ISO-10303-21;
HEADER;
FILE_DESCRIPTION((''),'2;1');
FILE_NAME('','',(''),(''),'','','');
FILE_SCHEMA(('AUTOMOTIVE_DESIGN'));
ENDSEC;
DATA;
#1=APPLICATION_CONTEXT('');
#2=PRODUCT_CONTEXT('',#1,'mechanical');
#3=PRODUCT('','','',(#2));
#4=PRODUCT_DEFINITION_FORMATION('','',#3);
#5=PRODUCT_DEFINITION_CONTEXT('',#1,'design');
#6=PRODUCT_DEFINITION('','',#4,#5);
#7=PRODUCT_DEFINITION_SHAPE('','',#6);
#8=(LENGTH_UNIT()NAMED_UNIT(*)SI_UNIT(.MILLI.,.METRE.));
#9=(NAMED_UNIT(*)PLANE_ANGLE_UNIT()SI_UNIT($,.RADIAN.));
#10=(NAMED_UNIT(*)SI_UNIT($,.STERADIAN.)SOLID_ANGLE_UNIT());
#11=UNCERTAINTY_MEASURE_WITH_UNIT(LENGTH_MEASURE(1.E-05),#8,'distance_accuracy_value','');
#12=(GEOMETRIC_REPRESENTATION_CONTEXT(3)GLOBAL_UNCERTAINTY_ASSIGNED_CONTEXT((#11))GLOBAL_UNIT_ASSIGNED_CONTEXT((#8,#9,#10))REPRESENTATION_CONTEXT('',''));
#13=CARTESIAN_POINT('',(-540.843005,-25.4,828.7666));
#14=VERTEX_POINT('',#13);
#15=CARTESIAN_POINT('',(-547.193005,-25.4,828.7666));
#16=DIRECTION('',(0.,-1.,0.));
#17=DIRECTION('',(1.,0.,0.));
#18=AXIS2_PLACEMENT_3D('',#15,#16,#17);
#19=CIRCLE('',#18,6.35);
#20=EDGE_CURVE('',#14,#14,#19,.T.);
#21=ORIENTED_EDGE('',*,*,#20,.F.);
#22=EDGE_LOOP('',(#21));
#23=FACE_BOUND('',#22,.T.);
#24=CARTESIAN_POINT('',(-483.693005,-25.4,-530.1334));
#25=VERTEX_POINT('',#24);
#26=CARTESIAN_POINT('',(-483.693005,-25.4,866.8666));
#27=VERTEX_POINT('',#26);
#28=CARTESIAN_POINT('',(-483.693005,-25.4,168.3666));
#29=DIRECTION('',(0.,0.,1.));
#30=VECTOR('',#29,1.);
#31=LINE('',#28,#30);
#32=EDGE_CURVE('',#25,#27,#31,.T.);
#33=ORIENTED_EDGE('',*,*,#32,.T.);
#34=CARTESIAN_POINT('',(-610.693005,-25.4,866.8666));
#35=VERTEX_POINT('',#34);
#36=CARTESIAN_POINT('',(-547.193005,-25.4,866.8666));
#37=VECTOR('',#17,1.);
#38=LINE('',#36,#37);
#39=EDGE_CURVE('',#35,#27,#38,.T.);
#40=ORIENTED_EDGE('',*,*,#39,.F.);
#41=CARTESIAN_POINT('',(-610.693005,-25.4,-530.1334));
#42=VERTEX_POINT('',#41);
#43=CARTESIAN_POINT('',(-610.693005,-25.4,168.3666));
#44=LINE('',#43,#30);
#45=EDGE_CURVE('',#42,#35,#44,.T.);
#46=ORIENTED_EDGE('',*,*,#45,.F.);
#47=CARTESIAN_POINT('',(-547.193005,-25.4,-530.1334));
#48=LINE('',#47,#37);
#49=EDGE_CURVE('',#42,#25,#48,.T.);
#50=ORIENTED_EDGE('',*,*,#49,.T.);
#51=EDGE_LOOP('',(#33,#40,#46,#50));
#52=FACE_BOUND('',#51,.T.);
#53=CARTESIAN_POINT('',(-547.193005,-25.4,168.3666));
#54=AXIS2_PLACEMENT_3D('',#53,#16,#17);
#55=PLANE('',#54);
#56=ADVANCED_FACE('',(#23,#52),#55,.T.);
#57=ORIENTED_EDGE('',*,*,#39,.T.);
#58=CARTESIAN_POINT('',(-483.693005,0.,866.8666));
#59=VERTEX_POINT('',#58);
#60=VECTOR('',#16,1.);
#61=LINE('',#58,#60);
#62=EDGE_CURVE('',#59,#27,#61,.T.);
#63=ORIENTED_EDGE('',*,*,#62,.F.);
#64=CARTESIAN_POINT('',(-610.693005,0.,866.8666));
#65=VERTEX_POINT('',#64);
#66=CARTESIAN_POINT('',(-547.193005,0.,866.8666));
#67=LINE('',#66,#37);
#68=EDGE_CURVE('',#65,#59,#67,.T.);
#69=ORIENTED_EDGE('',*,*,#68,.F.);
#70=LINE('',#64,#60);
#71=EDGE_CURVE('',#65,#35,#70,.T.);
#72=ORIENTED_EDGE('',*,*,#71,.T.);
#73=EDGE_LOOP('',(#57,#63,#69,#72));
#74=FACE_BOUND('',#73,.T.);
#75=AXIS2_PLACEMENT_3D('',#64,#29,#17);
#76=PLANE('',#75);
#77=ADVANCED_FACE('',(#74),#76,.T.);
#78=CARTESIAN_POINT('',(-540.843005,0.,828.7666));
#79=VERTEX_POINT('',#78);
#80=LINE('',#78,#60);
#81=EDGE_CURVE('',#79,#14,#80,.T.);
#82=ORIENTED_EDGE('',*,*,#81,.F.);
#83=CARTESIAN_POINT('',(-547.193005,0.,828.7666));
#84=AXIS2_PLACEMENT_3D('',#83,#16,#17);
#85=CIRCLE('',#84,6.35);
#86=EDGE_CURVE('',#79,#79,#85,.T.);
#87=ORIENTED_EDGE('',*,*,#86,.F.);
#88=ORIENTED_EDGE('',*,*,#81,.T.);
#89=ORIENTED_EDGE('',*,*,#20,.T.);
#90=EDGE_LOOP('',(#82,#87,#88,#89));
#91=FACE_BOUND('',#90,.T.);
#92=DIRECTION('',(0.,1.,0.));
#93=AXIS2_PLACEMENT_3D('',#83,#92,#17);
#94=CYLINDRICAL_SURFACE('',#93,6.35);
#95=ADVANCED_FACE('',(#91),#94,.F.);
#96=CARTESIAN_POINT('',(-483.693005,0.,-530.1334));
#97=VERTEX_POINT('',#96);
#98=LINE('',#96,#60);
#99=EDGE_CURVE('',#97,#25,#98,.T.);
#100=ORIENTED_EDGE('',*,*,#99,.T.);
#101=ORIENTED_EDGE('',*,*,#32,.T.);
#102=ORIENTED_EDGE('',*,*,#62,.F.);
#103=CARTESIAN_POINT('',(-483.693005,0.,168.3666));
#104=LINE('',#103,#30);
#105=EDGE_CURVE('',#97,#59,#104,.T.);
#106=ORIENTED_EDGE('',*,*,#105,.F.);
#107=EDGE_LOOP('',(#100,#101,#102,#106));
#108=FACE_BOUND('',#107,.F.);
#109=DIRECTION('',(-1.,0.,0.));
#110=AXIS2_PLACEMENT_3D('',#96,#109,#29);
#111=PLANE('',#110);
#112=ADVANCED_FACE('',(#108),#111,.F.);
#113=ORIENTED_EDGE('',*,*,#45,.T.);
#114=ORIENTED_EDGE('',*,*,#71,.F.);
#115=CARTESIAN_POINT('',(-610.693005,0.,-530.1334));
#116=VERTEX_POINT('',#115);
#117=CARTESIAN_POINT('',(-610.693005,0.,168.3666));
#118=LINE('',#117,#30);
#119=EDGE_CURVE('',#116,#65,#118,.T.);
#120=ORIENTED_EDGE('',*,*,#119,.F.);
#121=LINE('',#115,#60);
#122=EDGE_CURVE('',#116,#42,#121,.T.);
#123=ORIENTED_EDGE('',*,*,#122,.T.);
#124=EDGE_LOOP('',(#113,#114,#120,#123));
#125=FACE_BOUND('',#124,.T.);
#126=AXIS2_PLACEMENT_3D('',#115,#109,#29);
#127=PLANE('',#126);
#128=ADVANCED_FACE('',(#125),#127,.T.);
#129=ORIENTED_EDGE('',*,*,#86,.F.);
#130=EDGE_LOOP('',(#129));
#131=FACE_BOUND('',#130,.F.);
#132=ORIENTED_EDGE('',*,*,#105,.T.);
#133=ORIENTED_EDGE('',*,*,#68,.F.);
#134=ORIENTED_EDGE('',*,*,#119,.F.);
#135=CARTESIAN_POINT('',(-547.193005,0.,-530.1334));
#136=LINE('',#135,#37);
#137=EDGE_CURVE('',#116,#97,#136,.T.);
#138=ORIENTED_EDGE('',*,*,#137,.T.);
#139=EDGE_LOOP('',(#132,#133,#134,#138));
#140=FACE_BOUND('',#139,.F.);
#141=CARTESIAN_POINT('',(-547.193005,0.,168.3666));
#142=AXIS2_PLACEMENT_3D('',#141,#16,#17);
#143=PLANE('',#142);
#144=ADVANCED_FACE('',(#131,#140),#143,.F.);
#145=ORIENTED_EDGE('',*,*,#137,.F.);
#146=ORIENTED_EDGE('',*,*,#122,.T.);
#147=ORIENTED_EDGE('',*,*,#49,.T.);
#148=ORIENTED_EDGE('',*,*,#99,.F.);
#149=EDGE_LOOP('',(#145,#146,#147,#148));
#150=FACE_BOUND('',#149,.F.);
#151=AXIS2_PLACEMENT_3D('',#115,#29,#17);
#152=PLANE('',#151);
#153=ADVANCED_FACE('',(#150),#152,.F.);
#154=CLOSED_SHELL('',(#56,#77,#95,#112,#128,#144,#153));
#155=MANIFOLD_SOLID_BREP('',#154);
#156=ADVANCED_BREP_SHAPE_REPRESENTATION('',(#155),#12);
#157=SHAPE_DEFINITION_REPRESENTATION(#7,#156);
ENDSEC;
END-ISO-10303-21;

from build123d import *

# Parameters (mm, degrees)
F0_W     = 127
F0_H     = 1397
F0_R     = 6.35
F1_DEPTH = 25.4


# Not quite as in the source:
# - the program builds the solid bodies; features that only make, move or delete a surface that nothing else refers to are left out


with BuildPart() as f1:
    # F0 (on Front) → F1 (new body)
    with BuildSketch(Plane.XZ):
        with Locations((-547.1930051203, 168.3665995002)):
            Rectangle(F0_W, F0_H)
        with Locations((-547.1930051203, 828.7665995002)):
            Circle(F0_R, mode=Mode.SUBTRACT)
    extrude(amount=F1_DEPTH)


solid = f1.part
